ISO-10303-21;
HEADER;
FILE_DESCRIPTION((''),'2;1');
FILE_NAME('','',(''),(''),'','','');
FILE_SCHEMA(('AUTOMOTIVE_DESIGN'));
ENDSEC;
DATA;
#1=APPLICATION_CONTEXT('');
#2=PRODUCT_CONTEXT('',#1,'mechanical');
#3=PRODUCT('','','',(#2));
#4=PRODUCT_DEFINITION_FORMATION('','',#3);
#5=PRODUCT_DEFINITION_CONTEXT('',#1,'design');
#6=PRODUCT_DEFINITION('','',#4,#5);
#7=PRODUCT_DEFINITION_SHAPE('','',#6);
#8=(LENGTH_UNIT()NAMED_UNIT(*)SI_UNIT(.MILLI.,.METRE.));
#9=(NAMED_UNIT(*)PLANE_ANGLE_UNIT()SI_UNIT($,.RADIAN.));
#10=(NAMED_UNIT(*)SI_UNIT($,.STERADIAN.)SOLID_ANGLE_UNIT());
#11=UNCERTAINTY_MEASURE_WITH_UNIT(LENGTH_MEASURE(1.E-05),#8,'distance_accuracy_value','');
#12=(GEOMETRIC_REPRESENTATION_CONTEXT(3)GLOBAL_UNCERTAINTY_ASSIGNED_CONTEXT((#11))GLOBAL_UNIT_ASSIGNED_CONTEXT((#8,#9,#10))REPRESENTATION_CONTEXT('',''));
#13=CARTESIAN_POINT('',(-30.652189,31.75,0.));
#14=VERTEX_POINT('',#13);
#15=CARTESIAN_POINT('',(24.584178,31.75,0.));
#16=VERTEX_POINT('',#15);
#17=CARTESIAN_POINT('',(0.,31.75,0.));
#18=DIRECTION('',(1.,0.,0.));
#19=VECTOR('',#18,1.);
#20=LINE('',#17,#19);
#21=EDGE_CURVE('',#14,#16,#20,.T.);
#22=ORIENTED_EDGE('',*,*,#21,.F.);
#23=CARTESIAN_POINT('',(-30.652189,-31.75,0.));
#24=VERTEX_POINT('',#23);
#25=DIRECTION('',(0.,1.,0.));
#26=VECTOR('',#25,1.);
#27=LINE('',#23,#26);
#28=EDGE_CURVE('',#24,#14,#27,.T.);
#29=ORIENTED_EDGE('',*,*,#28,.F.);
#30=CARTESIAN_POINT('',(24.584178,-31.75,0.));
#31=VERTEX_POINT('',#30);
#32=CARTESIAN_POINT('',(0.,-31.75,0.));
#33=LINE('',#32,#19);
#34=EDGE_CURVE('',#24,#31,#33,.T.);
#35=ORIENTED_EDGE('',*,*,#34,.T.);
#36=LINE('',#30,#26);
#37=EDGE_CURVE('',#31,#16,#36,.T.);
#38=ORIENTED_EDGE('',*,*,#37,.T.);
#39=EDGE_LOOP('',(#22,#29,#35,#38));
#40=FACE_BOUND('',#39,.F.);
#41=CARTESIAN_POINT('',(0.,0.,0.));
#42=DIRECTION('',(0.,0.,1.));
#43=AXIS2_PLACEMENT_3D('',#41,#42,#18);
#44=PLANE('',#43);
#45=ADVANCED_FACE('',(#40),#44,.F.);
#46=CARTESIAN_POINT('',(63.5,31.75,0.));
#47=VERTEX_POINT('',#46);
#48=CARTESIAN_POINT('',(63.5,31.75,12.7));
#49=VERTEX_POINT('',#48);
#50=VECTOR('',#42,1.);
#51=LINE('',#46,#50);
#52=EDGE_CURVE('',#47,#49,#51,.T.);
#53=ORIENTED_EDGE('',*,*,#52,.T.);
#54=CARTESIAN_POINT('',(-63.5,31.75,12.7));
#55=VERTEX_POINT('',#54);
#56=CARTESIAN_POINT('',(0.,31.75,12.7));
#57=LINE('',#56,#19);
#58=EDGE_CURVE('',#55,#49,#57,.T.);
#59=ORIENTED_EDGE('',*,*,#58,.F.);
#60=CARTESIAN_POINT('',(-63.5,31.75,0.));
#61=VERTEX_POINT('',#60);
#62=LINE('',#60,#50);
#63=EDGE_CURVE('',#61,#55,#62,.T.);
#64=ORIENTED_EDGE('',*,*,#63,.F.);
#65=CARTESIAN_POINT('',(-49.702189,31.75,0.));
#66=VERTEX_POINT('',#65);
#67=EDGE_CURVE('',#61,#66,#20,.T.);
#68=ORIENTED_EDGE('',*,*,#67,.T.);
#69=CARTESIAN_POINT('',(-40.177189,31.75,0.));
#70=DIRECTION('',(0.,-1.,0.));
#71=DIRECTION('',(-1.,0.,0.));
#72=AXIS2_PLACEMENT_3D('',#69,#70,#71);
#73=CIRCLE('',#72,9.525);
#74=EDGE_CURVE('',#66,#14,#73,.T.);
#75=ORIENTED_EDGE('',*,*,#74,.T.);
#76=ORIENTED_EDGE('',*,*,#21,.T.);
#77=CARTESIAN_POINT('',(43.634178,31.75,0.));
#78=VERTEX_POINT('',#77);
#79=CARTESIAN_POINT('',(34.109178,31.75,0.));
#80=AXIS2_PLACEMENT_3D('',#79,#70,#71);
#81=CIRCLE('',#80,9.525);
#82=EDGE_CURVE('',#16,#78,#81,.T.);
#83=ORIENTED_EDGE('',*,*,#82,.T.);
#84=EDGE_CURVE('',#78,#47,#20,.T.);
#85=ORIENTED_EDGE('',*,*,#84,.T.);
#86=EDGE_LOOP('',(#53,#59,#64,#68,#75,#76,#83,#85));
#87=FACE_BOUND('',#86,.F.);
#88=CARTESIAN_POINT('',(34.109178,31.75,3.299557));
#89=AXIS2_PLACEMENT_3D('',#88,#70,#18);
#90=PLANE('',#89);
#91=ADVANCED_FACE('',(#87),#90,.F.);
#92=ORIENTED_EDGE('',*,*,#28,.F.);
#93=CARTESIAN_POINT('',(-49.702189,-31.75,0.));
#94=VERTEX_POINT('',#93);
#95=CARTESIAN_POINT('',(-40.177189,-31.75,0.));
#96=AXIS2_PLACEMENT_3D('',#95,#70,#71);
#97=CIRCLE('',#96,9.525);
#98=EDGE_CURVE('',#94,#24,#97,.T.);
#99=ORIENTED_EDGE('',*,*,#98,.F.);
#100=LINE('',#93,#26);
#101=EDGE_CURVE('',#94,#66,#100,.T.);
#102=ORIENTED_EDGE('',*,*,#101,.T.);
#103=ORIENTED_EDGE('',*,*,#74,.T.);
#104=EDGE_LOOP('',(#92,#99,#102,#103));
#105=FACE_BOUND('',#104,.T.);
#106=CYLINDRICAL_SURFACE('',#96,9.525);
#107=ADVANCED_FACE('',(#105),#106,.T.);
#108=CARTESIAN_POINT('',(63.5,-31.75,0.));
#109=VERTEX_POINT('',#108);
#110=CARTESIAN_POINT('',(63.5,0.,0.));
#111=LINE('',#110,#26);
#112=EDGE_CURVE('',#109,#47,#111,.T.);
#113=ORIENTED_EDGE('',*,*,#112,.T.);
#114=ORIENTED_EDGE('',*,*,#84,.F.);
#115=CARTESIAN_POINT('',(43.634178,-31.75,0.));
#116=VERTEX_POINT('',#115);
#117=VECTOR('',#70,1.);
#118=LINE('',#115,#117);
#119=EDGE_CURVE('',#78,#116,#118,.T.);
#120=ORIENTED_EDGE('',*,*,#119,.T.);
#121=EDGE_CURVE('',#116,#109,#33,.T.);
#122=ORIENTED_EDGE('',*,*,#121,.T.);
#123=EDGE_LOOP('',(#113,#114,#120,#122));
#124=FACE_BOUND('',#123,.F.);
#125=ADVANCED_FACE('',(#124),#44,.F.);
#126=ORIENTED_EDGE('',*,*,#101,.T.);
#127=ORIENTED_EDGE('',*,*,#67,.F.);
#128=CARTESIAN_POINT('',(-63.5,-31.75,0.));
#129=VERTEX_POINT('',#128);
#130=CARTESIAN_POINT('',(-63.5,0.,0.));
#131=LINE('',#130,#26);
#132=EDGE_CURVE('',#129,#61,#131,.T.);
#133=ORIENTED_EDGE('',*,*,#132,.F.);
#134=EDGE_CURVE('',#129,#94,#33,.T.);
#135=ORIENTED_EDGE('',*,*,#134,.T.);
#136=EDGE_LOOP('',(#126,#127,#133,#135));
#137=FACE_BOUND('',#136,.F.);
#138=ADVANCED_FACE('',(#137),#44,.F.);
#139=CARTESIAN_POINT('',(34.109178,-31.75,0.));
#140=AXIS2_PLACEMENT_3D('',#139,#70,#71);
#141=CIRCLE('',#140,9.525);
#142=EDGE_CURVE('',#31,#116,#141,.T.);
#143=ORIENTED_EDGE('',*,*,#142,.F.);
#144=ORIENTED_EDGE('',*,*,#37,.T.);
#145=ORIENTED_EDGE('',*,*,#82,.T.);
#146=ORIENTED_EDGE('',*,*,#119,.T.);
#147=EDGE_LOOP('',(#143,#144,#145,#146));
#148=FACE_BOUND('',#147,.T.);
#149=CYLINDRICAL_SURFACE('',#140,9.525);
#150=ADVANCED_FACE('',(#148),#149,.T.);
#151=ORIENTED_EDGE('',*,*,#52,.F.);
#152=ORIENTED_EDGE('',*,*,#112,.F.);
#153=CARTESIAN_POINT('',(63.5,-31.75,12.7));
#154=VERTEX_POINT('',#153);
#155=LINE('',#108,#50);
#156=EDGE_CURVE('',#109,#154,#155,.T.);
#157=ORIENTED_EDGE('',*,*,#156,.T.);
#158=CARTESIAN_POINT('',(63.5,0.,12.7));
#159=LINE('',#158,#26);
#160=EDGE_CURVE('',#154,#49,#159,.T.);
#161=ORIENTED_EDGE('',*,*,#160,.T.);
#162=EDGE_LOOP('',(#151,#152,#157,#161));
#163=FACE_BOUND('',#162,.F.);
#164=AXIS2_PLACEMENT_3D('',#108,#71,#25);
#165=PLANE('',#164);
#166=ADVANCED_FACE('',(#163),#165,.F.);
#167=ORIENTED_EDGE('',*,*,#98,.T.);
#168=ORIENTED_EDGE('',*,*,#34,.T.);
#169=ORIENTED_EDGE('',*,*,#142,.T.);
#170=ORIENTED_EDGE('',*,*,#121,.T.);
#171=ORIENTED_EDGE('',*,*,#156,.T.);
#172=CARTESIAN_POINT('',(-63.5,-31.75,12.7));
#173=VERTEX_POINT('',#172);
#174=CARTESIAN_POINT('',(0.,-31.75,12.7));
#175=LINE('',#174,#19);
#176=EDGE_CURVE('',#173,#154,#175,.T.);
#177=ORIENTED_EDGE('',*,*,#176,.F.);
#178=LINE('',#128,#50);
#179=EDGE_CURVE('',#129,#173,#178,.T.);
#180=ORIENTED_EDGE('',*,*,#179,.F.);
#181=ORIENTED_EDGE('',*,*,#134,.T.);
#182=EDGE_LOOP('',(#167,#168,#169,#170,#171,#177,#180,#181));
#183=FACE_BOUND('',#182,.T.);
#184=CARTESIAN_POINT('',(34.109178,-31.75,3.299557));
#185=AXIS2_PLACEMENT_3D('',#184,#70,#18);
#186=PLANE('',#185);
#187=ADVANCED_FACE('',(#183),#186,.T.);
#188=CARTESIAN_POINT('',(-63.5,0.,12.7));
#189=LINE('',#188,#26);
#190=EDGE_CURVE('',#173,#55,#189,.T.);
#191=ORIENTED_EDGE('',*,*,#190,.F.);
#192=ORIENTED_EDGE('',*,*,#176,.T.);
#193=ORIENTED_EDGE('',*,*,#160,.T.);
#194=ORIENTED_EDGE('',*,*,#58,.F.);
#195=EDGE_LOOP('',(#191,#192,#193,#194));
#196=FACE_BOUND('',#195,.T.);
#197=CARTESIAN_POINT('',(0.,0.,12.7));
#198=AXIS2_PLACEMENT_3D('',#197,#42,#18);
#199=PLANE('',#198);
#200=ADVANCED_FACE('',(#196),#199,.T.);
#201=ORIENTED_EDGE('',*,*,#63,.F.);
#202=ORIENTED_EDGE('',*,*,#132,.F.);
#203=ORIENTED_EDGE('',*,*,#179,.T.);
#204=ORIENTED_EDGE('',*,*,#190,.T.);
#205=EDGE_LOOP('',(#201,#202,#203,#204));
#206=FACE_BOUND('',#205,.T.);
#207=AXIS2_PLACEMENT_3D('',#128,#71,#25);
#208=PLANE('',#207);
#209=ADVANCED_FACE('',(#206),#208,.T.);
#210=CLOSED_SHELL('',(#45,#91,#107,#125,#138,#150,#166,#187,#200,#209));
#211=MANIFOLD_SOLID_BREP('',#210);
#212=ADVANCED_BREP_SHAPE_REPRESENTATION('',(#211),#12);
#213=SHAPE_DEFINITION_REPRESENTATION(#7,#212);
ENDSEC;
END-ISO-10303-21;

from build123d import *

# Parameters (mm, degrees)
F0_W     = 127
F0_H     = 63.5
F1_DEPTH = 12.7
F4_DEPTH = 63.5


with BuildPart() as f1:
    # F0 (on Top) → F1 (new body)
    with BuildSketch(Plane.XY):
        Rectangle(F0_W, F0_H)
    extrude(amount=F1_DEPTH)

    # F2 (on face) + F3 (on face) → F4 (join)
    with BuildSketch(Plane.XZ.offset(31.75)):
        with BuildLine():
            ThreePointArc((-49.7021888137, 0), (-40.1771888137, -9.525), (-30.6521888137, 0))
            Line((-30.6521888137, 0), (-49.7021888137, 0))
        make_face()
    with BuildSketch(Plane.XZ.offset(31.75)):
        with BuildLine():
            Line((24.5841778814, 0), (43.6341778814, 0))
            ThreePointArc((43.6341778814, 0), (34.1091778814, 9.525), (24.5841778814, 0))
        make_face()
        with BuildLine():
            ThreePointArc((24.5841778814, 0), (34.1091778814, -9.525), (43.6341778814, 0))
            Line((43.6341778814, 0), (24.5841778814, 0))
        make_face()
    extrude(amount=-F4_DEPTH)


solid = f1.part
